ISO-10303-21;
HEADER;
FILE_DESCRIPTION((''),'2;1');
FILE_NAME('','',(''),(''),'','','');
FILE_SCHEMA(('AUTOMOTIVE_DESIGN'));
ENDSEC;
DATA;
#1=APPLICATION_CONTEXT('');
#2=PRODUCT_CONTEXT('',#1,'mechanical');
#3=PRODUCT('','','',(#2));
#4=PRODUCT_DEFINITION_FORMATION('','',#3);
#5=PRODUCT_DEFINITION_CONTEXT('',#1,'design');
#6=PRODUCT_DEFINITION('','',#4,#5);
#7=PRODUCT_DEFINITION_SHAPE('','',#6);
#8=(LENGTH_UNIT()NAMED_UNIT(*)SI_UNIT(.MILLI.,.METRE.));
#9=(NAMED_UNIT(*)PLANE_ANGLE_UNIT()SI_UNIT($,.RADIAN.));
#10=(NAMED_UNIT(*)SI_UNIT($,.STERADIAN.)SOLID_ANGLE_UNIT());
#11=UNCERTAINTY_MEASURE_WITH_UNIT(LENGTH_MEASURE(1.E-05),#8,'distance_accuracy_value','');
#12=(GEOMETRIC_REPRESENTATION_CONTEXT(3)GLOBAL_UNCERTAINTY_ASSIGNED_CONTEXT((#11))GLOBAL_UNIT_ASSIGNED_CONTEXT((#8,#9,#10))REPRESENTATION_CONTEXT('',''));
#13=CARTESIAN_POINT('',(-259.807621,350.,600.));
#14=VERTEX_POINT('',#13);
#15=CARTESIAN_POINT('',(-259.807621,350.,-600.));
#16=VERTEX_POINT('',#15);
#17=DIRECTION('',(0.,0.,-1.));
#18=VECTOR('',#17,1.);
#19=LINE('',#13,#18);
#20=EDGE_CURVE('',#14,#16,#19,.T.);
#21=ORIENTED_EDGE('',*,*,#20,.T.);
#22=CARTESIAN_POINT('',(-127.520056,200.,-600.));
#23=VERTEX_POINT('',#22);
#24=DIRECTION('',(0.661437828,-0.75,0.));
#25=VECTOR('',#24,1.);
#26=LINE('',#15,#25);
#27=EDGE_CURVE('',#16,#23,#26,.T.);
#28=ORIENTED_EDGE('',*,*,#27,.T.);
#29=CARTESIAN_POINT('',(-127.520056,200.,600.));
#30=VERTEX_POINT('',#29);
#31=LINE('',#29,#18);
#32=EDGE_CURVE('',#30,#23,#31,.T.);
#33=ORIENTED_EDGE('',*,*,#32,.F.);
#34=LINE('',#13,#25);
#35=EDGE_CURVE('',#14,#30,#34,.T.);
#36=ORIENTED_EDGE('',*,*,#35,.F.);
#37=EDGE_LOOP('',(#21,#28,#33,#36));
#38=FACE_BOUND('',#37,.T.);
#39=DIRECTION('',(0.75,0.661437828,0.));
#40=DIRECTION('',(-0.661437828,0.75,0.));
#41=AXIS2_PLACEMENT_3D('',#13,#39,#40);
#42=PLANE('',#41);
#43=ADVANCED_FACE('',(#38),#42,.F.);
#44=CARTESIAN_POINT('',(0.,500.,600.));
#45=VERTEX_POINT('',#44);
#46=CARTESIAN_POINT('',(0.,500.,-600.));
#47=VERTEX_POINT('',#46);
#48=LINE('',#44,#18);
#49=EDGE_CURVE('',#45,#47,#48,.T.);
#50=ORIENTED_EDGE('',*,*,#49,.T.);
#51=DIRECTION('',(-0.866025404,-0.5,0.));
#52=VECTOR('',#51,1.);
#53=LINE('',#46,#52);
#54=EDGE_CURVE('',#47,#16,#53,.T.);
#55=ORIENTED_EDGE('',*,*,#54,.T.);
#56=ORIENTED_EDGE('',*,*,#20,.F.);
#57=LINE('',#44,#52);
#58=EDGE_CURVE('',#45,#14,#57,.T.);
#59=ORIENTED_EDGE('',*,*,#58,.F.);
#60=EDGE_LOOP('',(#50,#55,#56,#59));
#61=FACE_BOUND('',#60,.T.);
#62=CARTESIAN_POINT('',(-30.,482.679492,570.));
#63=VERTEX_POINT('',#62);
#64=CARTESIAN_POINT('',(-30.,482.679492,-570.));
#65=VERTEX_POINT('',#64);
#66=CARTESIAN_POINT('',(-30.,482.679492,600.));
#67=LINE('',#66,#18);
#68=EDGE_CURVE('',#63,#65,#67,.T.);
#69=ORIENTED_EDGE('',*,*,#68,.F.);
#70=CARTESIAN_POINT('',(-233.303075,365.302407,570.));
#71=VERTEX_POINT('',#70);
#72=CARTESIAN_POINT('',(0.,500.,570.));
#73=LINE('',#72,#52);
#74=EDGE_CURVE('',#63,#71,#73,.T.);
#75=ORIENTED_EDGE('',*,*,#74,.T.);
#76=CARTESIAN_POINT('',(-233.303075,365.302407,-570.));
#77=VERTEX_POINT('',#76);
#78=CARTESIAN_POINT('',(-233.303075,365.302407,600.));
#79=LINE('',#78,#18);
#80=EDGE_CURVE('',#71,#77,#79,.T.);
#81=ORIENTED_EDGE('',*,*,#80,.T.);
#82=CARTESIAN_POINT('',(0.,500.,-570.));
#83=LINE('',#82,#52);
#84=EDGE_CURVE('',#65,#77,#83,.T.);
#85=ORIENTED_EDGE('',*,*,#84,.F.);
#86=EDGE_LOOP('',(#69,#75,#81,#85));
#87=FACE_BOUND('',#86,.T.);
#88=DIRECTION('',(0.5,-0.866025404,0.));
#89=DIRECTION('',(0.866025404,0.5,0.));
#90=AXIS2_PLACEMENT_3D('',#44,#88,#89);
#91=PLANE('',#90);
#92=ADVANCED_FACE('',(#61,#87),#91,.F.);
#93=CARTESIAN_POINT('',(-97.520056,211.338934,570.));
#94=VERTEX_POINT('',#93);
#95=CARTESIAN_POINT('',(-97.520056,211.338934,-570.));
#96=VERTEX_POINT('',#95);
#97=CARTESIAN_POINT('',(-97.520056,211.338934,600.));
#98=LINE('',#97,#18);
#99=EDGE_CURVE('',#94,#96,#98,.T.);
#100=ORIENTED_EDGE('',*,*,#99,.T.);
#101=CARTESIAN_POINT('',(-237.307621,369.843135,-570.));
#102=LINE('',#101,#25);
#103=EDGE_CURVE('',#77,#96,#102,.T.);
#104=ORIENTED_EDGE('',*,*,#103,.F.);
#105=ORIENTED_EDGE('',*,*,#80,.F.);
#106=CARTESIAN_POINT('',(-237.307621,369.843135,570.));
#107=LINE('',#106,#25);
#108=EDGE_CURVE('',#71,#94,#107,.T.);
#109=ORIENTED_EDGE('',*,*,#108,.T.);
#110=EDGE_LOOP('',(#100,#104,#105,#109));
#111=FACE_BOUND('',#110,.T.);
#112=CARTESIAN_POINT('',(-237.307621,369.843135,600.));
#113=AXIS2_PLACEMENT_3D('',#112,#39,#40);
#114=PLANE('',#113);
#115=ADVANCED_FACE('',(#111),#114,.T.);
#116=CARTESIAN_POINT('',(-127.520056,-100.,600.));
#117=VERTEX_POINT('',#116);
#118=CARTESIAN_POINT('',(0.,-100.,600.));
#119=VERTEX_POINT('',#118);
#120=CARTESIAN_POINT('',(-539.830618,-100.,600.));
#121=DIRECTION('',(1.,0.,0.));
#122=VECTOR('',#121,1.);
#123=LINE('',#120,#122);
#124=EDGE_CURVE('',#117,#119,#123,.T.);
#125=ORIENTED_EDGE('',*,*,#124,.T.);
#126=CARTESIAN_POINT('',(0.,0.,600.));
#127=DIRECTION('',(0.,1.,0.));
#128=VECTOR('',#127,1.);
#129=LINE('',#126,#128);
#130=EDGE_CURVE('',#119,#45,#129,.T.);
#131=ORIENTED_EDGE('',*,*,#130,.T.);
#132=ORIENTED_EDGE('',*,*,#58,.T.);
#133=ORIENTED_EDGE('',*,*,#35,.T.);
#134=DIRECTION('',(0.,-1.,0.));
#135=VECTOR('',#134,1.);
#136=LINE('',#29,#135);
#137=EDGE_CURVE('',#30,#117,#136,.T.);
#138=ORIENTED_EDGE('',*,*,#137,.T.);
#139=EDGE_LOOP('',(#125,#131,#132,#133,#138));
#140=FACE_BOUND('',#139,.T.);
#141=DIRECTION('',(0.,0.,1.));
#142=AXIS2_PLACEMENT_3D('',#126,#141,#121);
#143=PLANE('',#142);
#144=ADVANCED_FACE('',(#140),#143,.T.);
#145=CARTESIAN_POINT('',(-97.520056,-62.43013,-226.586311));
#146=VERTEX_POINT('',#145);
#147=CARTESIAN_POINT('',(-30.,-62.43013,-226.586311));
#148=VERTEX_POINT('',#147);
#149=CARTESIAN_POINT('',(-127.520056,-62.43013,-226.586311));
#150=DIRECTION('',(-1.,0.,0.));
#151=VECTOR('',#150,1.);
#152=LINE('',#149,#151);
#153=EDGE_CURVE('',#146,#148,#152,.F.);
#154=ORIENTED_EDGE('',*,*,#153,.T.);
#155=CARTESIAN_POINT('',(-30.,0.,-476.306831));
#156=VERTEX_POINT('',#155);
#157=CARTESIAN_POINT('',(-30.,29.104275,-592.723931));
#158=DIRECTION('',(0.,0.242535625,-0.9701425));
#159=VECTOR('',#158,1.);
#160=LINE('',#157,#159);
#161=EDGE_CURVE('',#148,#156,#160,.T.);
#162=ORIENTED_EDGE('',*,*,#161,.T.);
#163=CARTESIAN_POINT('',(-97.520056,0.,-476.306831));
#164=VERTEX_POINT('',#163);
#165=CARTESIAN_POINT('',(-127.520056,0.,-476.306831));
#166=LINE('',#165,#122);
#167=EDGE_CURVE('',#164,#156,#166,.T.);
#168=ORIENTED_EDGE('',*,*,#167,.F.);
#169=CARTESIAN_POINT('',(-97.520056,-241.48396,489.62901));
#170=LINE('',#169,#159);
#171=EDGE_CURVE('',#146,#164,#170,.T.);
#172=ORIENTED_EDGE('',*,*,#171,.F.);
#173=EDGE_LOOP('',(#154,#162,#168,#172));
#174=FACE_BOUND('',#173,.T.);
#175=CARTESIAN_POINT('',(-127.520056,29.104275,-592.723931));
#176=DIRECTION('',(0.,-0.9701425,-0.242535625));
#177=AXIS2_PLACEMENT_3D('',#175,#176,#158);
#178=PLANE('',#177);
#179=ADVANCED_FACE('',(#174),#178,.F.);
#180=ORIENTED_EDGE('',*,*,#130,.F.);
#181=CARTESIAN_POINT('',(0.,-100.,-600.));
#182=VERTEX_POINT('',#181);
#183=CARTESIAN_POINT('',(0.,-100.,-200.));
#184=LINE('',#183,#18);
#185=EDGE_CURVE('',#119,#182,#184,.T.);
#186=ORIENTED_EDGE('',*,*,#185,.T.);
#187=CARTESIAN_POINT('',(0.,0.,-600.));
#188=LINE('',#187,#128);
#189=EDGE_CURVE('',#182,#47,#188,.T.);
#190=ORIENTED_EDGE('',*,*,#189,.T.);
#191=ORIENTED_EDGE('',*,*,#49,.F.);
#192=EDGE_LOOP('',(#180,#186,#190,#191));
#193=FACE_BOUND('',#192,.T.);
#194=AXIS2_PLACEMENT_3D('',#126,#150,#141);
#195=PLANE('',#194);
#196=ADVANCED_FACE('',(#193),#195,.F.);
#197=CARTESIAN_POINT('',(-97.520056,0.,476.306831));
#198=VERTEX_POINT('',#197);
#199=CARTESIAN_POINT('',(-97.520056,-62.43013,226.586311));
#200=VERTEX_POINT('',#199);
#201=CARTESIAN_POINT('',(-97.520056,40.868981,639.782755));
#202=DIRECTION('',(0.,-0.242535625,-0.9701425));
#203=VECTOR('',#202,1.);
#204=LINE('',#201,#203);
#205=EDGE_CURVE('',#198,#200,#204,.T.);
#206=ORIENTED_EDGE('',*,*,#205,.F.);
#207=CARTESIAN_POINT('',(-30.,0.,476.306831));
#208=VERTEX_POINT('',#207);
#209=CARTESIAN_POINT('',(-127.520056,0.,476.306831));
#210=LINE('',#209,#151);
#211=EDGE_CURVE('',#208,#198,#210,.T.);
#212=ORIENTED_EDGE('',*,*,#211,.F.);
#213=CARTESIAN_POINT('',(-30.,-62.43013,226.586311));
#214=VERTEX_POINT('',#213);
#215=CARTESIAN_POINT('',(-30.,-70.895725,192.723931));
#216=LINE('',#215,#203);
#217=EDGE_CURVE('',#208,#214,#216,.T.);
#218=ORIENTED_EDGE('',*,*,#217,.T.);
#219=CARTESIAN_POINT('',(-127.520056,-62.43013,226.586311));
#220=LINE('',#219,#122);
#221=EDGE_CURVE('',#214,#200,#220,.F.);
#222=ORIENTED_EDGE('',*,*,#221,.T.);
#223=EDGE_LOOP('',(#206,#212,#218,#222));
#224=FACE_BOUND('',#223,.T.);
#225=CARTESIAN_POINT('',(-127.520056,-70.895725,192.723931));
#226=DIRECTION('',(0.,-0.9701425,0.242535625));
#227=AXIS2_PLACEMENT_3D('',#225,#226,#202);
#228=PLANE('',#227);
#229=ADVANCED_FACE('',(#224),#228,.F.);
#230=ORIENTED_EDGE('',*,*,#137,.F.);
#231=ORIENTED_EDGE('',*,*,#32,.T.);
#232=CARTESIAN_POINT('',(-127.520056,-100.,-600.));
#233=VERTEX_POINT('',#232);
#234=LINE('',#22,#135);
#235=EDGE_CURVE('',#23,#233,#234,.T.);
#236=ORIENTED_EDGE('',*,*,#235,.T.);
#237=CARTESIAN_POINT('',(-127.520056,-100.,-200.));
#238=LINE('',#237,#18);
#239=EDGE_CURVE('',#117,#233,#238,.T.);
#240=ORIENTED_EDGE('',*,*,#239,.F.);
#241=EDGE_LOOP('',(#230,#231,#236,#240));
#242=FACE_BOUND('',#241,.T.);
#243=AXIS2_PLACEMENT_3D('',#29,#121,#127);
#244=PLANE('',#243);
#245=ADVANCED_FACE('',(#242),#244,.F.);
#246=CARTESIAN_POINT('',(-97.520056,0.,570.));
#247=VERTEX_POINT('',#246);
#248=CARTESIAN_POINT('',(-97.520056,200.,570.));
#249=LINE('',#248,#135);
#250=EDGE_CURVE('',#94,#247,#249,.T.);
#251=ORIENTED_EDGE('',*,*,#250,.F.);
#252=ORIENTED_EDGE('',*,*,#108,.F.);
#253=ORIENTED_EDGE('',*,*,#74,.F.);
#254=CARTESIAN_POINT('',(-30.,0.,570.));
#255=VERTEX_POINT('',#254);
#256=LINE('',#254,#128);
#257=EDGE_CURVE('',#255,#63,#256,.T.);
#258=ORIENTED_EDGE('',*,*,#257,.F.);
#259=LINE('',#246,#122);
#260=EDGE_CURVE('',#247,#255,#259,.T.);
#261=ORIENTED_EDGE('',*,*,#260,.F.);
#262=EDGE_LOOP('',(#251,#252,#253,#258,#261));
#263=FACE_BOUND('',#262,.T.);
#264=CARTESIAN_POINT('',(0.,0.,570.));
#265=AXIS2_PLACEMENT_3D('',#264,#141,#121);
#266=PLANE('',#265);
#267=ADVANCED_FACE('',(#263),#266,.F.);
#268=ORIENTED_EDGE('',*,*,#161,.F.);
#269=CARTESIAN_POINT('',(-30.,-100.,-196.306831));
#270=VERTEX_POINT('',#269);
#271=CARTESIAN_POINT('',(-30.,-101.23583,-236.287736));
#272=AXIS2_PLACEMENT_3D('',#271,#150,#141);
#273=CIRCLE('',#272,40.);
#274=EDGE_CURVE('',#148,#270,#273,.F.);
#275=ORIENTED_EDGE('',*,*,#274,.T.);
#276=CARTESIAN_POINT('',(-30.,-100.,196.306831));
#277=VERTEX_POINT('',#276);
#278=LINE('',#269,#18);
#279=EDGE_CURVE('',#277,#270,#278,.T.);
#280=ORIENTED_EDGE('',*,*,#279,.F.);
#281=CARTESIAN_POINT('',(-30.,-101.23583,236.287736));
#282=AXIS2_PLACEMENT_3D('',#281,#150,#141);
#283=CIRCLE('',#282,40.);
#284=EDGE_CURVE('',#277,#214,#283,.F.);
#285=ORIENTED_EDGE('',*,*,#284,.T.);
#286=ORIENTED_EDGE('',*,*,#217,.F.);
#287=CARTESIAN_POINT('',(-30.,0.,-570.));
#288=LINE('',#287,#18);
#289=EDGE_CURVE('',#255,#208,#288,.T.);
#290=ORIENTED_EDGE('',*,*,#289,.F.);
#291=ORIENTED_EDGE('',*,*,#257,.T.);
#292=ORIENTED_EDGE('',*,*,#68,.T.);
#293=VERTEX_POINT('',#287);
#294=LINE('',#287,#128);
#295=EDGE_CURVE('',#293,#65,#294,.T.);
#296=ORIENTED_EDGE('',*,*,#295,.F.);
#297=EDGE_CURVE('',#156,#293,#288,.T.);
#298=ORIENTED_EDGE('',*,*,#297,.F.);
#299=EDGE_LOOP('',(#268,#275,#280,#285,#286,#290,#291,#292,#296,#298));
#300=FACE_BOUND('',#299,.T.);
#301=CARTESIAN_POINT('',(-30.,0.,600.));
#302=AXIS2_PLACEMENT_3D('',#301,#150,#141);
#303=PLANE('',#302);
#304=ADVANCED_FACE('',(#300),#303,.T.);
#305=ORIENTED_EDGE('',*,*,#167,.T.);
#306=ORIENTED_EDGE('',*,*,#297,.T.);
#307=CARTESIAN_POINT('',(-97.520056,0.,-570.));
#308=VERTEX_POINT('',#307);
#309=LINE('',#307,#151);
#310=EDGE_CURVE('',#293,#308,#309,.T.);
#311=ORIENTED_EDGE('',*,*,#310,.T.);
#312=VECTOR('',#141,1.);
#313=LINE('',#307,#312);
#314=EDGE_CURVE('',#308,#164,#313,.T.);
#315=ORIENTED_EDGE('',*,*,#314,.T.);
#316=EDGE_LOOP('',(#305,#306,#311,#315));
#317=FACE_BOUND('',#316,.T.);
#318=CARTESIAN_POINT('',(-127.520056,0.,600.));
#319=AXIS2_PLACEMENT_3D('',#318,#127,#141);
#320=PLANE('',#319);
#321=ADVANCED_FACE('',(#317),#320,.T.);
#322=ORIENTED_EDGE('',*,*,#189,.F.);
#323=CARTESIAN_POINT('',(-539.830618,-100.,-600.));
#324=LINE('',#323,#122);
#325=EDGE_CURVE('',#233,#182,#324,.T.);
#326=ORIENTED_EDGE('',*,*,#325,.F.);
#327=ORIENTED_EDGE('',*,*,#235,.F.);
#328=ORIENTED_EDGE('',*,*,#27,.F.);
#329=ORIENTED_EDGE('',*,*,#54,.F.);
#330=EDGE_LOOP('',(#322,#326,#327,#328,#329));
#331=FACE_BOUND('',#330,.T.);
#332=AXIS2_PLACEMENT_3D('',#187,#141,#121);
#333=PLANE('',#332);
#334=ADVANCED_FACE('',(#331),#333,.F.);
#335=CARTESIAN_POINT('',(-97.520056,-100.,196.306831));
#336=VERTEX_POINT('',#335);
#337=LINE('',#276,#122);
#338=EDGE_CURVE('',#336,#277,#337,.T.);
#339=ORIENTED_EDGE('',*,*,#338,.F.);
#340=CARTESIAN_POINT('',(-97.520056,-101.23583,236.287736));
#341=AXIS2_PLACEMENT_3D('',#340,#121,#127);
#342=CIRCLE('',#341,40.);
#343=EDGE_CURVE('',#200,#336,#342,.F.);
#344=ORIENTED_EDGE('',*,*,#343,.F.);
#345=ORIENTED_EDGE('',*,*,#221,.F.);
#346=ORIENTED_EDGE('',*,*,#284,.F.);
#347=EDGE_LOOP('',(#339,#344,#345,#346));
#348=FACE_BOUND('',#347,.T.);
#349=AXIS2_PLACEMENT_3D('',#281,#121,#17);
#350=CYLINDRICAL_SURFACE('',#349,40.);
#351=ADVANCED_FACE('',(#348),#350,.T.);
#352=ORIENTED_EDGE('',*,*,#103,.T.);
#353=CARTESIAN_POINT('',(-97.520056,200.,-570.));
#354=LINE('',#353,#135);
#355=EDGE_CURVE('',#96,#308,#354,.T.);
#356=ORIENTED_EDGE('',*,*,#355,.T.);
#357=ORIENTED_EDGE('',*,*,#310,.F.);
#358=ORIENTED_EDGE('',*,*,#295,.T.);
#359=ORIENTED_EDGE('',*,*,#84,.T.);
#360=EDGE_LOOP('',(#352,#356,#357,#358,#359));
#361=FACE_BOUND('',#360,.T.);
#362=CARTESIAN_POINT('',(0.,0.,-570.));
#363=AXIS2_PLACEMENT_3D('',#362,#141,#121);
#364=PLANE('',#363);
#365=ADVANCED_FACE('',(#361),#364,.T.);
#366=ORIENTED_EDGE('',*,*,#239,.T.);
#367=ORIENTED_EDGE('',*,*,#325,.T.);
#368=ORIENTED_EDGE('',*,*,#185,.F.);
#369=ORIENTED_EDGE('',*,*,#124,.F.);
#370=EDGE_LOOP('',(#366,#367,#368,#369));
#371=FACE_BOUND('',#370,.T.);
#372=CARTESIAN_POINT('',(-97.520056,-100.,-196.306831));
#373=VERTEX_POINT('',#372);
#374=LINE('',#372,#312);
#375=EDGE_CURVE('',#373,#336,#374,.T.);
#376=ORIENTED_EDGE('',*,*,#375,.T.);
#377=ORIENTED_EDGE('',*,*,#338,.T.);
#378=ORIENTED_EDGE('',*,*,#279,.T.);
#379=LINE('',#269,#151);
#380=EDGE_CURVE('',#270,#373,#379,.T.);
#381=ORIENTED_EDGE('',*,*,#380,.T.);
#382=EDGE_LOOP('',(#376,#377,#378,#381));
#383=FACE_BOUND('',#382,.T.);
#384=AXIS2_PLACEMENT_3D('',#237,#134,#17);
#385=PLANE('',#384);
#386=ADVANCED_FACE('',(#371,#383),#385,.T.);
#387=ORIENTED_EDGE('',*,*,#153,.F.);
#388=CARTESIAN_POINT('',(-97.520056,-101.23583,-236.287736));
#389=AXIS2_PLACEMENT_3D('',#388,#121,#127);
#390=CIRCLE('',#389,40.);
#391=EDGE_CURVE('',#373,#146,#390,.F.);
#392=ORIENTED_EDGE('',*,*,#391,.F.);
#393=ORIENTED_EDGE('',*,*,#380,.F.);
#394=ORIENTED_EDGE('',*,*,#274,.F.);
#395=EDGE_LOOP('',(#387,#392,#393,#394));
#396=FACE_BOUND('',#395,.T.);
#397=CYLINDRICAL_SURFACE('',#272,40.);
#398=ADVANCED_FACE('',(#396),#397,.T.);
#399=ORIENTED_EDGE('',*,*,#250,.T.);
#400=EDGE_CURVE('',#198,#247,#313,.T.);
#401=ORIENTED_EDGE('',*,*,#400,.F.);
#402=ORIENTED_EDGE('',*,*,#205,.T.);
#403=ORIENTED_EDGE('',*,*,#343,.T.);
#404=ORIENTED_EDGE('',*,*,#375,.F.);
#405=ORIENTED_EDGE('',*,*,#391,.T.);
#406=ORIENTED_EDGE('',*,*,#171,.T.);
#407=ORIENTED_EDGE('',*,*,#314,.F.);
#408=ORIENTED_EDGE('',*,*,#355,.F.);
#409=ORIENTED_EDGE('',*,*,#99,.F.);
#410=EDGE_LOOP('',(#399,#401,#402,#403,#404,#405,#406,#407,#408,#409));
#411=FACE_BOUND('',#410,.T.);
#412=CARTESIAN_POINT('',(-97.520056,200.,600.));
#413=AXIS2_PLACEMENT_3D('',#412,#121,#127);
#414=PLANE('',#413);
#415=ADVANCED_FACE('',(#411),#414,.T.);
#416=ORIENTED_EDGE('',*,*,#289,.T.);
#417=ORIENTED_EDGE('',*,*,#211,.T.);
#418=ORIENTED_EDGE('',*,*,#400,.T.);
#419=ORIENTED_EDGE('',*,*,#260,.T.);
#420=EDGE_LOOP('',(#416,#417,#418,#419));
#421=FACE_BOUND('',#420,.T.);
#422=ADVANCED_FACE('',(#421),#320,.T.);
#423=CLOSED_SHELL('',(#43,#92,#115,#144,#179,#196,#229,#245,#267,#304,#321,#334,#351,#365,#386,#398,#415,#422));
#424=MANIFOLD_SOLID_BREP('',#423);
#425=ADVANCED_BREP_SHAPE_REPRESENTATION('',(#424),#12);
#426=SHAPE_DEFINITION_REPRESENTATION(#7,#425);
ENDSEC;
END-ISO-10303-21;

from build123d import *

# Parameters (mm, degrees)
BOSS_EXTRUDE1_DEPTH = 600
SHELL1_T            = -30
SKETCH3_W           = 67.520055582
SKETCH3_H           = 1140
CUT_EXTRUDE1_DEPTH  = 806.232885568
BOSS_EXTRUDE2_DEPTH = 127.52006
SHELL2_START        = -97.520055582
SHELL2_DEPTH        = 67.520055582
SKETCH5_W           = 67.520055582
SKETCH5_H           = 392.613662462
CUT_EXTRUDE2_DEPTH  = 868.409937688
BOSS_EXTRUDE3_DEPTH = 127.520055582
FILLET1_R           = 40


# Read off the part's stored shape, not the designer's step: Shell2
with BuildPart() as part:
    # Sketch2 → Boss-Extrude1 (new, symmetric)
    with BuildSketch(Plane.XY):
        Polygon((0, 0), (0, 500), (-259.807621135, 350), (-127.520055582, 200), (-127.520055582, 0), align=None)
    extrude(amount=BOSS_EXTRUDE1_DEPTH, both=True)

    # Shell1
    shell1_openings = [part.faces().sort_by_distance(p)[0] for p in [
        (-129.903810568, 425, 0),
    ]]
    offset(amount=SHELL1_T, openings=shell1_openings, kind=Kind.INTERSECTION)

    # Sketch3 → Cut-Extrude1 (cut, through all)
    with BuildSketch(Plane(origin=(0, 30, 0), x_dir=(1, 0, 0), z_dir=(0, 1, 0))):
        with Locations((-63.760027791, 0)):
            Rectangle(SKETCH3_W, SKETCH3_H)
    extrude(amount=-CUT_EXTRUDE1_DEPTH, mode=Mode.SUBTRACT)

    # Sketch4 → Boss-Extrude2 (add)
    with BuildSketch(Plane(origin=(0, 0, 0), x_dir=(0, 0, -1), z_dir=(1, 0, 0))):
        Polygon((-600, 0), (600, 0), (200, -100), (-200, -100), align=None)
    extrude(amount=-BOSS_EXTRUDE2_DEPTH)

    # Shell2 outline → Shell2 (cut)
    with BuildSketch(Plane.YZ.offset(SHELL2_START)):
        Polygon((0, -476.306831231), (0, 476.306831231), (-70, 196.306831231), (-70, -196.306831231), align=None)
    extrude(amount=SHELL2_DEPTH, mode=Mode.SUBTRACT)

    # Sketch5 → Cut-Extrude2 (cut, through all)
    with BuildSketch(Plane(origin=(0, -70, 0), x_dir=(1, 0, 0), z_dir=(0, 1, 0))):
        with Locations((-63.760027791, 0)):
            Rectangle(SKETCH5_W, SKETCH5_H)
    extrude(amount=-CUT_EXTRUDE2_DEPTH, mode=Mode.SUBTRACT)

    # Sketch6 → Boss-Extrude3 (add)
    with BuildSketch(Plane(origin=(0, 0, -600), x_dir=(0, 0, -1), z_dir=(1, 0, 0))):
        Polygon((-1200, 0), (-800, -100), (-1200, -100), align=None)
        Polygon((-400, -100), (0, 0), (0, -100), align=None)
    extrude(amount=-BOSS_EXTRUDE3_DEPTH)

    # Fillet1
    # the kernel refuses this fillet: 40 mm, written as the material it takes off along each edge
    with BuildSketch(Plane(origin=(-97.520055582, -70, 196.306831231), x_dir=(0, 0.24253562503633297, 0.9701425001453319), z_dir=(1, 0, 0))) as fillet1_piece_1:
        with BuildLine():
            CenterArc((31.211373056, 40), FILLET1_R, 195.806721483, 74.193278517)
            Line((-7.276068751, 29.104275004), (0, 0))
            Line((0, 0), (31.211373056, 0))
        make_face()
    extrude(amount=67.520055582, mode=Mode.SUBTRACT)
    with BuildSketch(Plane(origin=(-97.520055582, -70, -196.306831231), x_dir=(0, 0.24253562503633297, -0.9701425001453319), z_dir=(1, 0, 0))) as fillet1_piece_2:
        with BuildLine():
            CenterArc((31.211373056, -40), FILLET1_R, 90, 74.193278517)
            Line((-7.276068751, -29.104275004), (0, 0))
            Line((0, 0), (31.211373056, 0))
        make_face()
    extrude(amount=67.520055582, mode=Mode.SUBTRACT)


solid = part.part
